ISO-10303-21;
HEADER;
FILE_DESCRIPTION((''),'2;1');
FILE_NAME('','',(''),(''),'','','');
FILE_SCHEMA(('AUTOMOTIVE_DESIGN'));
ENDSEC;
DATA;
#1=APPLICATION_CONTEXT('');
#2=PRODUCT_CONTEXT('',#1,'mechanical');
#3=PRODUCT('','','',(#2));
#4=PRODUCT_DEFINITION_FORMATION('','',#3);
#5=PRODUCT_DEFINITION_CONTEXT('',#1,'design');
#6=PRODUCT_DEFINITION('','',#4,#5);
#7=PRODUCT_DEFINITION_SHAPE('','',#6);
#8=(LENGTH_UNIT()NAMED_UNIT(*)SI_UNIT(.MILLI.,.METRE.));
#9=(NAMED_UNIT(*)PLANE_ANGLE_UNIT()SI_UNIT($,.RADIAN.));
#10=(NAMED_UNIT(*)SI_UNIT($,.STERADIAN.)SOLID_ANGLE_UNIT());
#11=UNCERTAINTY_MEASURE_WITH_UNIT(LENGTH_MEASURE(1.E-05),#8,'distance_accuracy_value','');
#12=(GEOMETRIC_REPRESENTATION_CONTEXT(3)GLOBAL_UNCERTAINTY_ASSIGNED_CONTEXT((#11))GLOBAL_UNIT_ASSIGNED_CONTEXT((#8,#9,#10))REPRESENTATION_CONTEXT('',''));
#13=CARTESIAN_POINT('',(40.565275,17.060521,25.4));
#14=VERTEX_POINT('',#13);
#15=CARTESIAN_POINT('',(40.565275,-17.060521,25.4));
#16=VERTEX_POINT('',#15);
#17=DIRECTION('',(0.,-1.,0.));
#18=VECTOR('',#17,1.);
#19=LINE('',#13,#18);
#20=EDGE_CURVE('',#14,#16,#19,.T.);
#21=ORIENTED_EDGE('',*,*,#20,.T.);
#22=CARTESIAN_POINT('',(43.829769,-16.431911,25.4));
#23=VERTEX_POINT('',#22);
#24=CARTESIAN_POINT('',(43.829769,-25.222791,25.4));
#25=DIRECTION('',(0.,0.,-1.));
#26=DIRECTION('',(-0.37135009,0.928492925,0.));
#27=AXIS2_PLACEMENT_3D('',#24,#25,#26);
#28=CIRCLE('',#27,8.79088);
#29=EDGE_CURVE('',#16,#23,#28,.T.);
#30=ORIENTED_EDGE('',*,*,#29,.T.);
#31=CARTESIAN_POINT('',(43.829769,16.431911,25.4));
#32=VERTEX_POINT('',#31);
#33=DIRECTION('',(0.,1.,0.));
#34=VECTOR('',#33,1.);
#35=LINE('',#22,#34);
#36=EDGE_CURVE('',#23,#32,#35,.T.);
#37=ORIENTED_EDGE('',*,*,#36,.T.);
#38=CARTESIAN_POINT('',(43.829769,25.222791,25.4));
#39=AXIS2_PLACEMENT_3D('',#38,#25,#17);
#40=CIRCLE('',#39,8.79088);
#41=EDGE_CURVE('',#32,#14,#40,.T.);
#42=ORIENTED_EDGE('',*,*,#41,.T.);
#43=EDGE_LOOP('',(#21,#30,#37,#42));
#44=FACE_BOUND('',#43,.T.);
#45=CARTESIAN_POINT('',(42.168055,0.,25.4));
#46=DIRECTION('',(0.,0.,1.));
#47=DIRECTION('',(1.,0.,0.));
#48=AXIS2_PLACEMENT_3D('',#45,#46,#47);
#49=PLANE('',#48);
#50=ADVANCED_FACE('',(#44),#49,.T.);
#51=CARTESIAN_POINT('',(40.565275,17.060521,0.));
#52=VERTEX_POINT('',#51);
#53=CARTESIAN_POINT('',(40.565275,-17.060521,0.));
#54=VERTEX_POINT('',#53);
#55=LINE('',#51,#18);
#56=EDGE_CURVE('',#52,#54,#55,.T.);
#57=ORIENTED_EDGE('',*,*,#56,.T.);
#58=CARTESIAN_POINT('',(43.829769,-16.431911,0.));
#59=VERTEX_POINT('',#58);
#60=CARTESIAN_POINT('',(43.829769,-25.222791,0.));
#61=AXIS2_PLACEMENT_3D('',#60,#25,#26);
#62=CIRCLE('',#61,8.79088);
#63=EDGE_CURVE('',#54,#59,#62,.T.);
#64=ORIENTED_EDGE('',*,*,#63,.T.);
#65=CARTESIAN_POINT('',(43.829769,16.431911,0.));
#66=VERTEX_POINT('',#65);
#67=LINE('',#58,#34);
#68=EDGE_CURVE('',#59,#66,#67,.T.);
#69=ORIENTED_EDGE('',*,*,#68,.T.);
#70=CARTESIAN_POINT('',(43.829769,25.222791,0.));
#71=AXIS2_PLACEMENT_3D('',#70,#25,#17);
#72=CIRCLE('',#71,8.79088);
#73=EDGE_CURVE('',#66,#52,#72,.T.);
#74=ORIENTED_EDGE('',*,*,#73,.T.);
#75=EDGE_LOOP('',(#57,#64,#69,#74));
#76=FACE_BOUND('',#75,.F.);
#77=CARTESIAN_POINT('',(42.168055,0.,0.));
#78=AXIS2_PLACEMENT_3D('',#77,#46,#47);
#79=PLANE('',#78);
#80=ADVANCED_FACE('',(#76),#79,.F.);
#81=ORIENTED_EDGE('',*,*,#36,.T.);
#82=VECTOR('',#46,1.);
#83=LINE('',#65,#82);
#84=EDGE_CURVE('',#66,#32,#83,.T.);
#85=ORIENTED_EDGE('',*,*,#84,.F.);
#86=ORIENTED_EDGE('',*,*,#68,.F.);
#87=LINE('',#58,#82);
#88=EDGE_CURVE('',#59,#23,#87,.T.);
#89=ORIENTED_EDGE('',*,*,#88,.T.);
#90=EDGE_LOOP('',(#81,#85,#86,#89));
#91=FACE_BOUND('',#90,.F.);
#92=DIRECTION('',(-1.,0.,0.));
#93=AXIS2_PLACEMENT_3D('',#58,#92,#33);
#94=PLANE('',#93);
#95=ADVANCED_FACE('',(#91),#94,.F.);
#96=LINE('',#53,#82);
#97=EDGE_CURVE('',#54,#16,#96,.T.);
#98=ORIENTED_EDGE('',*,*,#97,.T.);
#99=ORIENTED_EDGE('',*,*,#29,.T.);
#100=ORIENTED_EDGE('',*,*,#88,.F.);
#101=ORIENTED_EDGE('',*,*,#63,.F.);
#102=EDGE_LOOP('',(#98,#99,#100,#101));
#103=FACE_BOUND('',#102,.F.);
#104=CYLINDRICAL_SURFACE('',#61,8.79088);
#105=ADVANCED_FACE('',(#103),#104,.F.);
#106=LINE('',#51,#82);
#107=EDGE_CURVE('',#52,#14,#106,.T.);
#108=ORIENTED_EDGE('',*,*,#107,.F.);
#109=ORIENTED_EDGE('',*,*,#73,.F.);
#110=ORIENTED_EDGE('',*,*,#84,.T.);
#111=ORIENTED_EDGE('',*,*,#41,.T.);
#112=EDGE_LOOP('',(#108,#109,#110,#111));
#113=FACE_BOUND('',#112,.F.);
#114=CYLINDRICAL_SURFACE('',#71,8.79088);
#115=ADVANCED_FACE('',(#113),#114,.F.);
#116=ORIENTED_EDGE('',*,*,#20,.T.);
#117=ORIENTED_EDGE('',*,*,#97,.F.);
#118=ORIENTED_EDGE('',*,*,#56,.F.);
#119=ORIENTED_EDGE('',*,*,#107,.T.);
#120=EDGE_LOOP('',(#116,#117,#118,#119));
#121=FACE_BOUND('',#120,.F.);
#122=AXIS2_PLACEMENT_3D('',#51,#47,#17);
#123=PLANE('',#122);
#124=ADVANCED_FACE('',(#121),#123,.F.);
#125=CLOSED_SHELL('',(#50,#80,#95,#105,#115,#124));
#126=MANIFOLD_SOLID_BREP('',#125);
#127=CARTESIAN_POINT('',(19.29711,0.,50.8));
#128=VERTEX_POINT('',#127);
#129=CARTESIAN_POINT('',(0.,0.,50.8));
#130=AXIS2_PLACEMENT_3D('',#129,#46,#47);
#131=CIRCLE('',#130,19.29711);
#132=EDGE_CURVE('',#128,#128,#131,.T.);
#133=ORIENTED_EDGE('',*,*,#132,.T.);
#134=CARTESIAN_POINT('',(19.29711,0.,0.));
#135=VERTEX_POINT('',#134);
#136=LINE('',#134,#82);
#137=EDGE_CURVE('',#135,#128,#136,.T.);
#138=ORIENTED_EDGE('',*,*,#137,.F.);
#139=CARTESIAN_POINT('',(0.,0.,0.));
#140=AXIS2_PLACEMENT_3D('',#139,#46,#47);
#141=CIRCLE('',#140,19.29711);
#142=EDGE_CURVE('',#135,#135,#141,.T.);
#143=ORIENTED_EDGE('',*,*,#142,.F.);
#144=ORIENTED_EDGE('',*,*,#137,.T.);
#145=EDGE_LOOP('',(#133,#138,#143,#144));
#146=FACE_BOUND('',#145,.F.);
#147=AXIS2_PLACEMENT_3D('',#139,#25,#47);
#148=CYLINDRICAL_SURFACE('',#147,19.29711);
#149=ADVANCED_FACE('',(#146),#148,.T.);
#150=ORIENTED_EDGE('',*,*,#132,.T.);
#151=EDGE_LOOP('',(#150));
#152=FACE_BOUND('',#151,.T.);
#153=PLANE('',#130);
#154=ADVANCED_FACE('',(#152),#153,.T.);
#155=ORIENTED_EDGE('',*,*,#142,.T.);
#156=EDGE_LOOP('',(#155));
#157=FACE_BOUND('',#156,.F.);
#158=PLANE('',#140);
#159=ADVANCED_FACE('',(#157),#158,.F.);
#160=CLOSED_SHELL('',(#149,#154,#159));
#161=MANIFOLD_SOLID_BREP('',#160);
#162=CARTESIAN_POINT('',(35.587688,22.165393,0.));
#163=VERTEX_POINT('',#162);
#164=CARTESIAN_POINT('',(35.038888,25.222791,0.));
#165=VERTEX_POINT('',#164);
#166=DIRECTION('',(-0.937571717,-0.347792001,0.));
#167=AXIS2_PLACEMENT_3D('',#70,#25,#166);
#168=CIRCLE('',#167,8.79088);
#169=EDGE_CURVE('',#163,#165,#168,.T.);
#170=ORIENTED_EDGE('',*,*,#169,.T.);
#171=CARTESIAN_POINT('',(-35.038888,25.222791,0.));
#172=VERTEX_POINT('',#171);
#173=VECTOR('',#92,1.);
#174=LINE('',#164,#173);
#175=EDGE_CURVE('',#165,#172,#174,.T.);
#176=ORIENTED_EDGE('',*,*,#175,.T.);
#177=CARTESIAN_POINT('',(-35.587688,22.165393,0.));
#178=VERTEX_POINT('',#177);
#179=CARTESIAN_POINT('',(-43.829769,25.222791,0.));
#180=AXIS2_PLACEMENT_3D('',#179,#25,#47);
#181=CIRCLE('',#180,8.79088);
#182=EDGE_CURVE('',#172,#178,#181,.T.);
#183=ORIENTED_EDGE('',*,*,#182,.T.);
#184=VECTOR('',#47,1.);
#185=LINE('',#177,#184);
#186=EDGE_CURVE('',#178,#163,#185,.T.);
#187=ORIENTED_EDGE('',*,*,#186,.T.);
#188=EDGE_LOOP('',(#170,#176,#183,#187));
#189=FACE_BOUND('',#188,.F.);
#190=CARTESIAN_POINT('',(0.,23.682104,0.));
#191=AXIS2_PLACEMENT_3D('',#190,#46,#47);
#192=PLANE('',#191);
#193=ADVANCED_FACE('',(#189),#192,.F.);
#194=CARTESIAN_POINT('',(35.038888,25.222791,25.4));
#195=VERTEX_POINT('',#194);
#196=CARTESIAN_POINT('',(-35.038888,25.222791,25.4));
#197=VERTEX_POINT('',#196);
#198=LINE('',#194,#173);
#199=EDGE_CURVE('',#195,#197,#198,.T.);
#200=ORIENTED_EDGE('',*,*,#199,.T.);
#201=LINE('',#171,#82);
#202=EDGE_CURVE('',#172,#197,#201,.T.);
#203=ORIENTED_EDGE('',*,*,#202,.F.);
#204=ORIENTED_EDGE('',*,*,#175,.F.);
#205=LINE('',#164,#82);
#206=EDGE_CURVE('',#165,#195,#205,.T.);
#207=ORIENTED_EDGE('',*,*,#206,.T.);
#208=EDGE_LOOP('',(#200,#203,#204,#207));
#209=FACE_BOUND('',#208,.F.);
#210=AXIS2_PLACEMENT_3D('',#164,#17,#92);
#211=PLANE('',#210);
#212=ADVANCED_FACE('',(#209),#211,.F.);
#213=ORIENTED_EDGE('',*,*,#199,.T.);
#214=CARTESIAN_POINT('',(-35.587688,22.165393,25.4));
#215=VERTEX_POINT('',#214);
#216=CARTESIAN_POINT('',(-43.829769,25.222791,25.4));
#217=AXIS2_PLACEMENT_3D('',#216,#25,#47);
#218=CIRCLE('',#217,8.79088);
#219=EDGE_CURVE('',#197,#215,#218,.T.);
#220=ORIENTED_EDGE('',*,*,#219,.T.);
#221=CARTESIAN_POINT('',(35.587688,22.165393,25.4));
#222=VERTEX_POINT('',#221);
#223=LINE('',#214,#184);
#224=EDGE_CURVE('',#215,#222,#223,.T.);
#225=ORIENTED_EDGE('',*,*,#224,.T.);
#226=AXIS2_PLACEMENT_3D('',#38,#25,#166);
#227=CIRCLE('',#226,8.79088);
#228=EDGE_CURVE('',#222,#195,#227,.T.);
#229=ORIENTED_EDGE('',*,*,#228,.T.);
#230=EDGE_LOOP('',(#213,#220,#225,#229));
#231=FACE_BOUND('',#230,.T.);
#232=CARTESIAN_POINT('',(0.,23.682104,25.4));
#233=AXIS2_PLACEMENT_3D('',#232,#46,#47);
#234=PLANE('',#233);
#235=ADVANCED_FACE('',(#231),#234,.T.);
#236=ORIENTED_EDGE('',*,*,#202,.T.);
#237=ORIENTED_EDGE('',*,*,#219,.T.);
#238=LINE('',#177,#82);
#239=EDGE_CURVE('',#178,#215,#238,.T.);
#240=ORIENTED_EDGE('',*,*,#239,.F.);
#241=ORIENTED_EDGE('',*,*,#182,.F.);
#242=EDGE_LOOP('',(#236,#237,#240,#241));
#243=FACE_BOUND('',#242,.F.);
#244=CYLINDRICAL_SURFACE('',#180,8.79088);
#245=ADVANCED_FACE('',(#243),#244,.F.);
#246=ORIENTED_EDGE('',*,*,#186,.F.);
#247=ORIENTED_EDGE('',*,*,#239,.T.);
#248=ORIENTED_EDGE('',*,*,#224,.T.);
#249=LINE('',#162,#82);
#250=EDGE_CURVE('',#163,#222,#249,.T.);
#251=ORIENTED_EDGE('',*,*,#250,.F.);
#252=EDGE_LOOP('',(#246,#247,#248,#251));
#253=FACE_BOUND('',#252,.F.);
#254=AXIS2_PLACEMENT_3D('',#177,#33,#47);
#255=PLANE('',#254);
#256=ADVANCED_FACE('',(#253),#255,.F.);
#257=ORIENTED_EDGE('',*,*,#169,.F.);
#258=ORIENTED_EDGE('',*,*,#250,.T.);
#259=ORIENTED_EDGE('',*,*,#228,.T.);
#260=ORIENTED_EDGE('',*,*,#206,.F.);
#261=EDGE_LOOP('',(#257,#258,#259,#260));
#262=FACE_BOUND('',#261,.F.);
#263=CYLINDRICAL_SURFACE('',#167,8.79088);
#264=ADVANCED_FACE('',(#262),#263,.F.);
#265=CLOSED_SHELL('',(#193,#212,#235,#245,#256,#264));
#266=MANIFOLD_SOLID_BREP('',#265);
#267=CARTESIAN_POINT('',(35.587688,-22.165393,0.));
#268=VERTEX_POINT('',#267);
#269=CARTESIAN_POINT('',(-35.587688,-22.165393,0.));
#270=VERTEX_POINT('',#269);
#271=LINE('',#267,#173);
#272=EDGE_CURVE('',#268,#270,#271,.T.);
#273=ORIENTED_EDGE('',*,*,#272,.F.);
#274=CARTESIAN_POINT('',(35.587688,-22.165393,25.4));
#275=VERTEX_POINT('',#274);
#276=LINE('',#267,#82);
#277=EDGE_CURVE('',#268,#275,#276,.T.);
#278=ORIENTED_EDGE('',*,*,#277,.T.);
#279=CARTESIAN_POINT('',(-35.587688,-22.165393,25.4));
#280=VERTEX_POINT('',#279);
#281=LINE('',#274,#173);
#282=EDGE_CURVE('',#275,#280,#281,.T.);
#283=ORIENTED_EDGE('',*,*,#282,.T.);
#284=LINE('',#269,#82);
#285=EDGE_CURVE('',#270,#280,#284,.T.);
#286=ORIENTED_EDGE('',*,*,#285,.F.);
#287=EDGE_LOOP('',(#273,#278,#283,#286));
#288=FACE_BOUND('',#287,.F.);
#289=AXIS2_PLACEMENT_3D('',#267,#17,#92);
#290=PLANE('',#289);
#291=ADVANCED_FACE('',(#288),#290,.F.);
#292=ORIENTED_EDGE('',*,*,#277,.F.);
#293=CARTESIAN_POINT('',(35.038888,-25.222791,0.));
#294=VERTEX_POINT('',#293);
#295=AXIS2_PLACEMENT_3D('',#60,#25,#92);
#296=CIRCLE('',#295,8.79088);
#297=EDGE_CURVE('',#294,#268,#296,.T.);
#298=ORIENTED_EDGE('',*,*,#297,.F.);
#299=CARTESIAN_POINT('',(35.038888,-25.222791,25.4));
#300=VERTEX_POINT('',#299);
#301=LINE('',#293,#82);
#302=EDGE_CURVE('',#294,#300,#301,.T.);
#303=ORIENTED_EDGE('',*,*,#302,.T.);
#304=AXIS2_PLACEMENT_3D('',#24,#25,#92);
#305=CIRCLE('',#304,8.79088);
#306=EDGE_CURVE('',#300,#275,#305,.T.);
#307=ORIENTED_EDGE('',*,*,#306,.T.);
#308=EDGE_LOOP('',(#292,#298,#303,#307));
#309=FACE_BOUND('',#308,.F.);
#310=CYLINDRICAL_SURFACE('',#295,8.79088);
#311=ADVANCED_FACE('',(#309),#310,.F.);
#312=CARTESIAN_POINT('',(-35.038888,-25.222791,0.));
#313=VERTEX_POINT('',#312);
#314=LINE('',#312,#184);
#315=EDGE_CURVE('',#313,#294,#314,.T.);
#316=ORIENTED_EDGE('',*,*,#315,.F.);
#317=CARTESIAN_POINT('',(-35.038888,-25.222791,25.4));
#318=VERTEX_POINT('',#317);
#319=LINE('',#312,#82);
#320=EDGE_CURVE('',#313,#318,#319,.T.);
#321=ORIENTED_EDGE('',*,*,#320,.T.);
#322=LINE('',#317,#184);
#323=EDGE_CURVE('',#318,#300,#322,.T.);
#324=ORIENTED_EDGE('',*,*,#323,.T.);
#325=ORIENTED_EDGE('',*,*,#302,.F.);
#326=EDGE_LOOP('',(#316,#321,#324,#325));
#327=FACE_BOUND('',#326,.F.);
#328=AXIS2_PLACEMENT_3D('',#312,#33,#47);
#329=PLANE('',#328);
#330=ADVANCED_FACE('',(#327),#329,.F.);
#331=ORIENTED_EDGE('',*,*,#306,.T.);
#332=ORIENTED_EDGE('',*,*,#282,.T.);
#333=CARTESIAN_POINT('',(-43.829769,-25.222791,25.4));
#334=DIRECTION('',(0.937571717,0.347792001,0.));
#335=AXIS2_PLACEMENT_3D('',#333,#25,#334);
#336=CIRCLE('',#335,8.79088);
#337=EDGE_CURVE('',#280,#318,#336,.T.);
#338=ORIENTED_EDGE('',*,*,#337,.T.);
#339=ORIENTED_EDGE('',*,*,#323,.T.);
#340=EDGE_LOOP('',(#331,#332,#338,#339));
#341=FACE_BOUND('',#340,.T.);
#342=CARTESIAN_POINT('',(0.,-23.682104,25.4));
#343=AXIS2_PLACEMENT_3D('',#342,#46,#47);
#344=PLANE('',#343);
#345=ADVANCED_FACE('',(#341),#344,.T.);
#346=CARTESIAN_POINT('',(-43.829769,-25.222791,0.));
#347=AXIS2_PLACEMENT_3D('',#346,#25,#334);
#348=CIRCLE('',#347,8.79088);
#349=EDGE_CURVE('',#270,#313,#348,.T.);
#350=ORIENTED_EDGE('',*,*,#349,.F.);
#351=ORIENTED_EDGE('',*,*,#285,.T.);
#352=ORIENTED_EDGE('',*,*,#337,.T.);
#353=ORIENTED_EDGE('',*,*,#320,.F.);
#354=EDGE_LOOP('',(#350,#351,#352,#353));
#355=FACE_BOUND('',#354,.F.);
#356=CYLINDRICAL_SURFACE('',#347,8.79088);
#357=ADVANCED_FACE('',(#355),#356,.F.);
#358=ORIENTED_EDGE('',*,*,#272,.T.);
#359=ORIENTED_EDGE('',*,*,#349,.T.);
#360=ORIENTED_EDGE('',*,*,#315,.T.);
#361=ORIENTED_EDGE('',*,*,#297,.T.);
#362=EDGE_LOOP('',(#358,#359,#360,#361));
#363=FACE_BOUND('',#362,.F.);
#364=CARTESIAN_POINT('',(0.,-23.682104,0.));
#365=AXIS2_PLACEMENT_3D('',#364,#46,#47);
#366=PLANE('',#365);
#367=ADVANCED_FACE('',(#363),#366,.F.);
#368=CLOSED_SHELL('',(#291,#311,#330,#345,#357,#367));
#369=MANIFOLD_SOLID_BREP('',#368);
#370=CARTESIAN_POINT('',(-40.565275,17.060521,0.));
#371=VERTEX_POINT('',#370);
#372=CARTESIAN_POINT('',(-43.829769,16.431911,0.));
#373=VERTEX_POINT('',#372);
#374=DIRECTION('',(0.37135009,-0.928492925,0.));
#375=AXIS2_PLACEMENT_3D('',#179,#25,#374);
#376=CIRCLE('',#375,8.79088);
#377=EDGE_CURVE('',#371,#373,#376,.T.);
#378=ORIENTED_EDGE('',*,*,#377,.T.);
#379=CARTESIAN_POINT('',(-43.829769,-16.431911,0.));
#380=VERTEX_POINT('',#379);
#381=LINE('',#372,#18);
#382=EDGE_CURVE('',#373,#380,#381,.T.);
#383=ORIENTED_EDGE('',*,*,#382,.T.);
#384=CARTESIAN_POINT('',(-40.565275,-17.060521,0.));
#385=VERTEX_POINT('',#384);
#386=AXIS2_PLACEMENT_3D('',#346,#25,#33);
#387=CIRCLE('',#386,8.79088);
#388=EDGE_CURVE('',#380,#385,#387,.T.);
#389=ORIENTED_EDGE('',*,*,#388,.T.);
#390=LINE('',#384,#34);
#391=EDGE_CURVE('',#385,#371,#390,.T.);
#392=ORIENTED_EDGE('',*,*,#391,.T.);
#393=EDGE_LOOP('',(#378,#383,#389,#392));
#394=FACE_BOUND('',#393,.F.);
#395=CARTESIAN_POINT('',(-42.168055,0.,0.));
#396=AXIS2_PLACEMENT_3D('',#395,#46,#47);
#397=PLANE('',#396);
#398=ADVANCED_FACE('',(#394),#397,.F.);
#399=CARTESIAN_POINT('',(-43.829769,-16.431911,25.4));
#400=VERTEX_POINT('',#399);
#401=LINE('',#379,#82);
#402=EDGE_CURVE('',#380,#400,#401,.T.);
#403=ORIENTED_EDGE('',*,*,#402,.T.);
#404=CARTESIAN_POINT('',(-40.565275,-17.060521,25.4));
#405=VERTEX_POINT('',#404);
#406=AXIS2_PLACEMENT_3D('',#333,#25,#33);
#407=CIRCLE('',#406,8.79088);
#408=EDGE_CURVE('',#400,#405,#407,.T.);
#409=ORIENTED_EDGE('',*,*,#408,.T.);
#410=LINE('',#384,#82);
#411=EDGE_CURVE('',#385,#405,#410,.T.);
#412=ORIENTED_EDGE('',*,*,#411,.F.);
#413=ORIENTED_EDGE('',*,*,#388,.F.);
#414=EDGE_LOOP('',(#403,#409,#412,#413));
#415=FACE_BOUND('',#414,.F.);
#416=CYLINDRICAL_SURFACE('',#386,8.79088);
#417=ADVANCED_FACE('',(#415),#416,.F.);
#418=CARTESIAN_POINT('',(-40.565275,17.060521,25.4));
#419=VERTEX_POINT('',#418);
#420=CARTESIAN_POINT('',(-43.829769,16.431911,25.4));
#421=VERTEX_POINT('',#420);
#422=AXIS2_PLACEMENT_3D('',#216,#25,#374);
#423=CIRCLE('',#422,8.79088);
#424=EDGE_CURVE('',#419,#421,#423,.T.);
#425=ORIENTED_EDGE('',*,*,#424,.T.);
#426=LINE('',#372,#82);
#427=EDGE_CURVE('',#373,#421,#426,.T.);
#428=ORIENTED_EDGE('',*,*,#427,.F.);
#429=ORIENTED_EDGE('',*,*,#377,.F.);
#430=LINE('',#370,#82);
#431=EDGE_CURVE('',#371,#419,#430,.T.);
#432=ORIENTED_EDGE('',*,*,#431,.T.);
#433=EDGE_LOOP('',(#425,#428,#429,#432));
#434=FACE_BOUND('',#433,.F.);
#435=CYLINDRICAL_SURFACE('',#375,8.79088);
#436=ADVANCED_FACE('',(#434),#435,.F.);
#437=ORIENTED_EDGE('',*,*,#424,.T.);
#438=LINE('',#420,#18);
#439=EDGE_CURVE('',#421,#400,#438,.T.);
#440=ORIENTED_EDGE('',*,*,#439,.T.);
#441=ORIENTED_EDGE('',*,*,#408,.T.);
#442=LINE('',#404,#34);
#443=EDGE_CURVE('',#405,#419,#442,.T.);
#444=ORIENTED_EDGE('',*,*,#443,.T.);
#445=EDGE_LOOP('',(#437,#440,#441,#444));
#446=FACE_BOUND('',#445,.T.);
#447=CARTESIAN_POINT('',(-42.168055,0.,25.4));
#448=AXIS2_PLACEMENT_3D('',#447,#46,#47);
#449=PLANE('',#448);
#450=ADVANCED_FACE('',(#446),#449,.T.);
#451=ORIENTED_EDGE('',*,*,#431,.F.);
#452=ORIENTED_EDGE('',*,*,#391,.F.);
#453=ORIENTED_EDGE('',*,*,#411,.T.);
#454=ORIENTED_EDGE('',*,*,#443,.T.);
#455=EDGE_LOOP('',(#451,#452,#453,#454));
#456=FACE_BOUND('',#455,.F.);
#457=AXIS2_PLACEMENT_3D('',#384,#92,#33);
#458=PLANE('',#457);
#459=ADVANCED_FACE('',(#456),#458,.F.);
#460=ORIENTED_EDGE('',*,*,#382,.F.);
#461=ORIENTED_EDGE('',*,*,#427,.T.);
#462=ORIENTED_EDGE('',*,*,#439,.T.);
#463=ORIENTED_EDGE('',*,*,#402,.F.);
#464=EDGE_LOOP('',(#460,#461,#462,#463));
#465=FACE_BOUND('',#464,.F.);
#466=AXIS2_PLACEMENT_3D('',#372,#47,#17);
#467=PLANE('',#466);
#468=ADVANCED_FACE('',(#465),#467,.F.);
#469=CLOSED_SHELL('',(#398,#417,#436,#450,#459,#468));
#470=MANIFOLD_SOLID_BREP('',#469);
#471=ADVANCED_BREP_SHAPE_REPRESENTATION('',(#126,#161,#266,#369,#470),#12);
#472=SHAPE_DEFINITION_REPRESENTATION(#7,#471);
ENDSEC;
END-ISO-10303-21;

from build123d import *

# Parameters (mm, degrees)
F1_DEPTH = 25.4
F0_R     = 19.2971097636
F3_DEPTH = 50.8


# Not quite as in the source:
# - the program builds the solid bodies; features that only make, move or delete a surface that nothing else refers to are left out


with BuildPart() as f1:
    # F0 (on Top) → F1 (new body)
    with BuildSketch(Plane.XY):
        with BuildLine():
            Line((35.0388884567, 25.2227913588), (-35.0388884567, 25.2227913588))
            ThreePointArc((-35.0388884567, 25.2227913588), (-35.1771760377, 23.6696604158), (-35.5876880321, 22.1653934568))
            Line((-35.5876880321, 22.1653934568), (35.5876880321, 22.1653934568))
            ThreePointArc((35.5876880321, 22.1653934568), (35.1771760377, 23.6696604158), (35.0388884567, 25.2227913588))
        make_face()
    extrude(amount=F1_DEPTH)


with BuildPart() as f1b:
    # F0 (on Top) → F1, piece 2 (new body)
    with BuildSketch(Plane.XY):
        with BuildLine():
            Line((40.5652746558, 17.0605210708), (40.5652746558, -17.0605210708))
            ThreePointArc((40.5652746558, -17.0605210708), (42.1675359576, -16.590493834), (43.8297688961, -16.4319109195))
            Line((43.8297688961, -16.4319109195), (43.8297688961, 16.4319109195))
            ThreePointArc((43.8297688961, 16.4319109195), (42.1675359576, 16.590493834), (40.5652746558, 17.0605210708))
        make_face()
    extrude(amount=F1_DEPTH)


with BuildPart() as f1c:
    # F0 (on Top) → F1, piece 3 (new body)
    with BuildSketch(Plane.XY):
        with BuildLine():
            Line((-43.8297688961, 16.4319109195), (-43.8297688961, -16.4319109195))
            ThreePointArc((-43.8297688961, -16.4319109195), (-42.1675359576, -16.590493834), (-40.5652746558, -17.0605210708))
            Line((-40.5652746558, -17.0605210708), (-40.5652746558, 17.0605210708))
            ThreePointArc((-40.5652746558, 17.0605210708), (-42.1675359576, 16.590493834), (-43.8297688961, 16.4319109195))
        make_face()
    extrude(amount=F1_DEPTH)


with BuildPart() as f1d:
    # F0 (on Top) → F1, piece 4 (new body)
    with BuildSketch(Plane.XY):
        with BuildLine():
            Line((-35.0388884567, -25.2227913588), (35.0388884567, -25.2227913588))
            ThreePointArc((35.0388884567, -25.2227913588), (35.1771760377, -23.6696604158), (35.5876880321, -22.1653934568))
            Line((35.5876880321, -22.1653934568), (-35.5876880321, -22.1653934568))
            ThreePointArc((-35.5876880321, -22.1653934568), (-35.1771760377, -23.6696604158), (-35.0388884567, -25.2227913588))
        make_face()
    extrude(amount=F1_DEPTH)


with BuildPart() as f3:
    # F0 (on Top) → F3 (new body)
    with BuildSketch(Plane.XY):
        Circle(F0_R)
    extrude(amount=F3_DEPTH)


solid = Compound([f1.part, f1b.part, f1c.part, f1d.part, f3.part])
